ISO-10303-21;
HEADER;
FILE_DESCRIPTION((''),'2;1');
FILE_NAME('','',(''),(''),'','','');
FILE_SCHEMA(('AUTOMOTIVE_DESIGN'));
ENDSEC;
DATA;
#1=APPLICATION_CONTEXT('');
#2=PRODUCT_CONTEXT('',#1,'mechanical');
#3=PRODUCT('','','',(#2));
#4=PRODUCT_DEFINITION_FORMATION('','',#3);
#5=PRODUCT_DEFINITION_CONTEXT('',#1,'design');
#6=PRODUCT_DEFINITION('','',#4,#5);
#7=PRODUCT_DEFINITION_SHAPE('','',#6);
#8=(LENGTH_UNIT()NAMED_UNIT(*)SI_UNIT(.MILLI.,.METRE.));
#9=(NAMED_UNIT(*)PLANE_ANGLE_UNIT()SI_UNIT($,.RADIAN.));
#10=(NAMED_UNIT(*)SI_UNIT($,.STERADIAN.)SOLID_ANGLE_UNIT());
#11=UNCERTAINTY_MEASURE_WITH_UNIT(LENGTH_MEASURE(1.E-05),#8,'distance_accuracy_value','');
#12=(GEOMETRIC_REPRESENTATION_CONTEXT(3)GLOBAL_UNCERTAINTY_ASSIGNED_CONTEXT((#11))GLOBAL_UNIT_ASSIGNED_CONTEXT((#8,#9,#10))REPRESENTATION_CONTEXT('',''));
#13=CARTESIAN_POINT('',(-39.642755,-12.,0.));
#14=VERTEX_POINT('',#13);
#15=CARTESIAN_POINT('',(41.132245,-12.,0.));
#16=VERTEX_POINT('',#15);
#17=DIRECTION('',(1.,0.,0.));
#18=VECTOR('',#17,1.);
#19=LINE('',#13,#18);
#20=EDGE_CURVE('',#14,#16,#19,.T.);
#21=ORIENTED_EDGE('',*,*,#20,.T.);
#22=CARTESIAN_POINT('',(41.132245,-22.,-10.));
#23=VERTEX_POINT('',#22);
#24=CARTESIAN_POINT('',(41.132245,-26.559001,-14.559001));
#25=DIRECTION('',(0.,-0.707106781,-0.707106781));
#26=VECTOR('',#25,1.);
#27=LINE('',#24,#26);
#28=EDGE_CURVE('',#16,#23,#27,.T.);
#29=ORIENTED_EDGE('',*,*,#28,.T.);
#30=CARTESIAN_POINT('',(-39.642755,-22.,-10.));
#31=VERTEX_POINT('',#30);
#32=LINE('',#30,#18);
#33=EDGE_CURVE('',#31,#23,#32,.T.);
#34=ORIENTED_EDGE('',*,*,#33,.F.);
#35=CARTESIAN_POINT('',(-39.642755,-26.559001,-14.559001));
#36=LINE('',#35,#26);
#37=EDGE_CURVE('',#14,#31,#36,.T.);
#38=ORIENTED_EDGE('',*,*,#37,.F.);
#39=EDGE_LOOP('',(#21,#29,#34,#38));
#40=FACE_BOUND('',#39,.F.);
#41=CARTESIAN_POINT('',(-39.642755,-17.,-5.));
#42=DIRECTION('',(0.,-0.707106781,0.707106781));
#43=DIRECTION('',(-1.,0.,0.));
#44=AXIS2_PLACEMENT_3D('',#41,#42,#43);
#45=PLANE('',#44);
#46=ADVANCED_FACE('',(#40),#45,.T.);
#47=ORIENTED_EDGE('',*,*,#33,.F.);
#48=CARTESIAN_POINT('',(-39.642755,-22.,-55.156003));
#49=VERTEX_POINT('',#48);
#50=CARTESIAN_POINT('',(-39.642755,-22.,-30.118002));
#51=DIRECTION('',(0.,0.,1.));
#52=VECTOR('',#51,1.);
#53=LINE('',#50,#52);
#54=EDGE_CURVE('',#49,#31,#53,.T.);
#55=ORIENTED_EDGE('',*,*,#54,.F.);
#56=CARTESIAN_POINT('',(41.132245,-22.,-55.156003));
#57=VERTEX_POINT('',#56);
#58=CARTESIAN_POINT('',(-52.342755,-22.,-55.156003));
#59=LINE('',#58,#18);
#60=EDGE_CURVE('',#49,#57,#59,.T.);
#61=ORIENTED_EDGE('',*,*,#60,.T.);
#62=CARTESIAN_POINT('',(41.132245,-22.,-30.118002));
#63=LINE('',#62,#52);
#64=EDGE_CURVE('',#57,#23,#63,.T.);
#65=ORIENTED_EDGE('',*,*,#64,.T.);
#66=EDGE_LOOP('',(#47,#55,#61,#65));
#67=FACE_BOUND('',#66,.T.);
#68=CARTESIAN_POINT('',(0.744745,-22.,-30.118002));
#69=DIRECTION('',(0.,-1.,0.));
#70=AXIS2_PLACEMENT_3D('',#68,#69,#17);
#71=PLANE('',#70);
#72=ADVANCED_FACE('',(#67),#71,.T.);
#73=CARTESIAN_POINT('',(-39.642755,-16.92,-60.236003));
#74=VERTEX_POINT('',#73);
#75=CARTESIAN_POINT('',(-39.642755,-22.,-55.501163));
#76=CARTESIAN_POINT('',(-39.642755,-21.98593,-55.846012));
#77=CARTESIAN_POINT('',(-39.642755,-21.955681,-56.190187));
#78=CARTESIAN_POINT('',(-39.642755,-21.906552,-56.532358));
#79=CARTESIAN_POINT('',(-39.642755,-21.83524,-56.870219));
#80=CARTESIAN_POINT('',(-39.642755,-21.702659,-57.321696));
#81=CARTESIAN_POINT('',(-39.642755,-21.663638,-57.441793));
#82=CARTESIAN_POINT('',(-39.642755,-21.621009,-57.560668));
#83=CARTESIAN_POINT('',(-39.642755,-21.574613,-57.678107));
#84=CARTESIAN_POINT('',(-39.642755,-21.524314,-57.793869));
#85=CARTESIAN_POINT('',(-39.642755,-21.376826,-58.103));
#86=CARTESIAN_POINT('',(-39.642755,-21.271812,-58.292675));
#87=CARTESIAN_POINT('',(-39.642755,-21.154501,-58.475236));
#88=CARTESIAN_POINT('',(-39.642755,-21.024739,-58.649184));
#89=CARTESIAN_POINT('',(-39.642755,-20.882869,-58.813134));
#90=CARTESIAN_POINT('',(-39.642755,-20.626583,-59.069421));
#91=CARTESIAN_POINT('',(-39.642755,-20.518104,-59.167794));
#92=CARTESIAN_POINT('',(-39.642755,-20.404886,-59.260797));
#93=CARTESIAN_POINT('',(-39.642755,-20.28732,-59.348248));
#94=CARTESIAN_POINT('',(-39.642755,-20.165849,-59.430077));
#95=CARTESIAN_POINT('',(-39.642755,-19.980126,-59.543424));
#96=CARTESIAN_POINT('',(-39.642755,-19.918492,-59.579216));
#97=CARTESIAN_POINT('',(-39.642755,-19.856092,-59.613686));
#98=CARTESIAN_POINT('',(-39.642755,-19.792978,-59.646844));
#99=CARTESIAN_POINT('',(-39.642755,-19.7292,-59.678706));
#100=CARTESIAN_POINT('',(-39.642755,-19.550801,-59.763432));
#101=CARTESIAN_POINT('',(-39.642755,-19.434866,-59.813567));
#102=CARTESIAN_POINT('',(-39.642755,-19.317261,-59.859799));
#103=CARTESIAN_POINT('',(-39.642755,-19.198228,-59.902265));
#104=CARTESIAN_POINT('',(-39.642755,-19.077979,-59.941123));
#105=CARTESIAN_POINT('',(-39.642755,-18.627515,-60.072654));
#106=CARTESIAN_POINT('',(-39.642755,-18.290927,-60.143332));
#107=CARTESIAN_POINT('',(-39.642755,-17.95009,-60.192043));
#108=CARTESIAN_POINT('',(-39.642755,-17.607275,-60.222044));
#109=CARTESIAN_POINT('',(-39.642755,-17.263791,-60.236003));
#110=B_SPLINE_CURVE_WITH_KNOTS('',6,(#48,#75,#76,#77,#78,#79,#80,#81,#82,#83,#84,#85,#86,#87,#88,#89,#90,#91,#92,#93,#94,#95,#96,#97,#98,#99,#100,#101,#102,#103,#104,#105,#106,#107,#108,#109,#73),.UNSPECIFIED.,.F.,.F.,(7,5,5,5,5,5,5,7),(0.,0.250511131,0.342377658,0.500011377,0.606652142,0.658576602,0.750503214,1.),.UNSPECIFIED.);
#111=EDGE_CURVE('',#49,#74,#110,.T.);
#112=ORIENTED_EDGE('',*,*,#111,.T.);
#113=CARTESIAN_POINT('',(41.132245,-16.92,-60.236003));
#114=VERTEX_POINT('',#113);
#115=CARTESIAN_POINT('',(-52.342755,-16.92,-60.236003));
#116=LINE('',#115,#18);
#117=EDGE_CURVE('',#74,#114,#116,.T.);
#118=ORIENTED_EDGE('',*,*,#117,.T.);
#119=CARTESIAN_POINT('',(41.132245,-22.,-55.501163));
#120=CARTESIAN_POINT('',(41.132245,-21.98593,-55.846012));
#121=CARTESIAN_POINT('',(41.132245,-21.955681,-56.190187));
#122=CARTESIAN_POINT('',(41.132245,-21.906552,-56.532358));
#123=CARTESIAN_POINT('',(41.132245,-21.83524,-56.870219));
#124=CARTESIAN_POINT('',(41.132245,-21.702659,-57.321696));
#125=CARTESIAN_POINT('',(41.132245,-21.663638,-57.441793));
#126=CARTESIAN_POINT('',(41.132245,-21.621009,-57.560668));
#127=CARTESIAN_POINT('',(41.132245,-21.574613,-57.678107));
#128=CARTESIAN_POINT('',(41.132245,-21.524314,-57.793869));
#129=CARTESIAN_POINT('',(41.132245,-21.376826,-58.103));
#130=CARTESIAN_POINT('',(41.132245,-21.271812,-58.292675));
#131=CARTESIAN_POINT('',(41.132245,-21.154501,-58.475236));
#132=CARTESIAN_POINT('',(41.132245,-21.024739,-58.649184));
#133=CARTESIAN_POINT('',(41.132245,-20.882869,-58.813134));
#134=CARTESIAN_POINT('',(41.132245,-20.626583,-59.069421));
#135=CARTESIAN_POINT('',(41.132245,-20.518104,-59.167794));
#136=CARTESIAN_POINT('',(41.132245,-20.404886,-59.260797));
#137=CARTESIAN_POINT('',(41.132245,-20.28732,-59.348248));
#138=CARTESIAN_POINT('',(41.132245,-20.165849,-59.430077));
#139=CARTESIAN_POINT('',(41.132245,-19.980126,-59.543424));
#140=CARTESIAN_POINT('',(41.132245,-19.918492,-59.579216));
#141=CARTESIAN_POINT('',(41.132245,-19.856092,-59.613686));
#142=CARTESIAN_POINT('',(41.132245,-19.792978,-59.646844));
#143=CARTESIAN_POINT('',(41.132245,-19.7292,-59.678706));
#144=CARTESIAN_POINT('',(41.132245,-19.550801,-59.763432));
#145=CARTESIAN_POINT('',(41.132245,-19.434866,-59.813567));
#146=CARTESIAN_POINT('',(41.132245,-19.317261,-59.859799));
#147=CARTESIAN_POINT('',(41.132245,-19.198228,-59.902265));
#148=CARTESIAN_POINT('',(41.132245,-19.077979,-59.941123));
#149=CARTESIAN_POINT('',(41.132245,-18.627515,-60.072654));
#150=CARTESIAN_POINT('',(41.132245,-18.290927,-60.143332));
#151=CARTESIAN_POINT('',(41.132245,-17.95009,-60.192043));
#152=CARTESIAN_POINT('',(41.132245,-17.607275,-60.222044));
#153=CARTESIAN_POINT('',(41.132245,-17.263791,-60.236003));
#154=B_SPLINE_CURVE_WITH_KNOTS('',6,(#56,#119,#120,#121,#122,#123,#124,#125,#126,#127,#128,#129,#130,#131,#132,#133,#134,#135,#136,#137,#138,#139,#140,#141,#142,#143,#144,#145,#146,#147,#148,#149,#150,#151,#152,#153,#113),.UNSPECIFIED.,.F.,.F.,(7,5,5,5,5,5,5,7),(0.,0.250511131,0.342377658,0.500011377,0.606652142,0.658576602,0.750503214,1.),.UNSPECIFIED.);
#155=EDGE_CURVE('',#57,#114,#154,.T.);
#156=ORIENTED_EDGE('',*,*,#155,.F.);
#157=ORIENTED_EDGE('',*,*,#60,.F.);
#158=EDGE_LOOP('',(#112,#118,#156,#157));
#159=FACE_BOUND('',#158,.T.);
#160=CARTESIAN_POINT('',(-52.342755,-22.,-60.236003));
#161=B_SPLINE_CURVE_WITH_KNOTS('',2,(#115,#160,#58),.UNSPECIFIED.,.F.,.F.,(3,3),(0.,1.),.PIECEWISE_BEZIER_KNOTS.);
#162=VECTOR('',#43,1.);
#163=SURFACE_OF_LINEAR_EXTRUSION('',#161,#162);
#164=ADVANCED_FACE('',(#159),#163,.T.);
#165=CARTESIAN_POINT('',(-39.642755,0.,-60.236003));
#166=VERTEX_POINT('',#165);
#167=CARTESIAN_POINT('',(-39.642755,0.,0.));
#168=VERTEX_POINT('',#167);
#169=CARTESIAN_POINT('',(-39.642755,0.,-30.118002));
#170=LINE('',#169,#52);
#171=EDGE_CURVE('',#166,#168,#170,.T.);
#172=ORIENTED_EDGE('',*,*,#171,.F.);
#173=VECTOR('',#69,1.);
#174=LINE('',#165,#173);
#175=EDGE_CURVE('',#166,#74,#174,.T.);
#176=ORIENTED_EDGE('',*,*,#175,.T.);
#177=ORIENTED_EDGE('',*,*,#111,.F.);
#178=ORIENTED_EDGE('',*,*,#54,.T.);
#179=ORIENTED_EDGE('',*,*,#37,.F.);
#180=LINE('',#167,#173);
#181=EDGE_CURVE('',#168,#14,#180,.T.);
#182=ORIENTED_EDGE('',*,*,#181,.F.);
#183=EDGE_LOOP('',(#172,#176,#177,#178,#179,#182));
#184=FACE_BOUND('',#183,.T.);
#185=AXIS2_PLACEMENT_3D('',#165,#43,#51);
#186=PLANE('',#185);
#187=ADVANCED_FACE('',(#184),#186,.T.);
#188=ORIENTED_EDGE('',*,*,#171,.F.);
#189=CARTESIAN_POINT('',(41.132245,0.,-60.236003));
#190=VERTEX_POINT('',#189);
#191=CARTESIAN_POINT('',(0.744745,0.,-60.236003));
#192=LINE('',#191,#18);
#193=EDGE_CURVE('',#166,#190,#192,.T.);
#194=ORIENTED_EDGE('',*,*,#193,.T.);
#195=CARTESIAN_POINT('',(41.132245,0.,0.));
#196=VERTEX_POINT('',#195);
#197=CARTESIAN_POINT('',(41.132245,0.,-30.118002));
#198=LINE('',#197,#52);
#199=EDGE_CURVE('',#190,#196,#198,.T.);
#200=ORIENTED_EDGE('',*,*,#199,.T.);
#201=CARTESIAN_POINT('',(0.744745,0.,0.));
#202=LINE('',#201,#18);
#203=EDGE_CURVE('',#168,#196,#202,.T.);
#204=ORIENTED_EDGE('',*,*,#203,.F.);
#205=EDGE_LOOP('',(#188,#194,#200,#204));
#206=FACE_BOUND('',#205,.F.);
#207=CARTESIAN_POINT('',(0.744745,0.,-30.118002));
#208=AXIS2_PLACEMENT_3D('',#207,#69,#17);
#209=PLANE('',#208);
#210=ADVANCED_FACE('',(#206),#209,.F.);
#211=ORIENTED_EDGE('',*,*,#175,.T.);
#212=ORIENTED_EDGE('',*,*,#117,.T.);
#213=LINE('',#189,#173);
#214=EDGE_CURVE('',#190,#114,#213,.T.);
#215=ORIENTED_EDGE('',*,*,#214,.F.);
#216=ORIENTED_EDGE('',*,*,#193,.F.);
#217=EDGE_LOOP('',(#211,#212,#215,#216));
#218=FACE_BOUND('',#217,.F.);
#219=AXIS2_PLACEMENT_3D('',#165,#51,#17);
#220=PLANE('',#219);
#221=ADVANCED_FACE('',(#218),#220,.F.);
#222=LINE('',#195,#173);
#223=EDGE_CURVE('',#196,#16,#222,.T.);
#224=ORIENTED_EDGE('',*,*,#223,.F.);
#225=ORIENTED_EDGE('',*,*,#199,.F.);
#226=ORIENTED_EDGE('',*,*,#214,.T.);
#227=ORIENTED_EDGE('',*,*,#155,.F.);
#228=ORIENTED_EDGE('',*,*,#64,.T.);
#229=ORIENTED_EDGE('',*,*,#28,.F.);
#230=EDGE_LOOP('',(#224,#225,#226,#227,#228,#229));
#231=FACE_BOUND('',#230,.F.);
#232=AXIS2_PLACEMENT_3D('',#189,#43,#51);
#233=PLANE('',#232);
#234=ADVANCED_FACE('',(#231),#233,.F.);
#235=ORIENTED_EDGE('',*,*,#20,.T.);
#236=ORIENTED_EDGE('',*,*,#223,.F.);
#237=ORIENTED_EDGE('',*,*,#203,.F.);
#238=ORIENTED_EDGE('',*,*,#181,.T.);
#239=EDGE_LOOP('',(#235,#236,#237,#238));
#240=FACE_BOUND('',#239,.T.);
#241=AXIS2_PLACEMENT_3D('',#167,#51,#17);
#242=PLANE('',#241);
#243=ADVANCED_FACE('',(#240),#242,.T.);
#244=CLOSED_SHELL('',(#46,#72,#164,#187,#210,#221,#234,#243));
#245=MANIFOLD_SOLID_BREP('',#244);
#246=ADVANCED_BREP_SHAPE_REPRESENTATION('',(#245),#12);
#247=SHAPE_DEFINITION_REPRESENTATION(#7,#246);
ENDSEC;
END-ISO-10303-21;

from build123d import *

# Parameters (mm, degrees)
F0_W        = 80.775000155
F0_H        = 60.2360032499
F1_DEPTH    = 22
F2_T1_DEPTH = 106.175000155
F3_SIZE     = 10


# Not quite as in the source:
# - a fillet or chamfer that OpenCascade refuses, or shapes differently, is made with other operations: its cross-section is extruded or revolved along the edge and cut away or added


with BuildPart() as f1:
    # F0 (on Front) → F1 (new body)
    with BuildSketch(Plane.XZ):
        with Locations((0.7447451353, -30.1180016249)):
            Rectangle(F0_W, F0_H)
    extrude(amount=F1_DEPTH)

    # F2: fillet of radius 5.08 on 1 edges, made by hand

    # F2_s2 → F2_t1 (cut)
    with BuildSketch(Plane.YZ.offset(-52.3427549422)):
        with BuildLine():
            add(Edge.make_bspline(
                [(-16.92, -60.2360032499), (-22, -60.2360032499), (-22, -55.1560032499)],
                knots=[0, 0, 0, 1, 1, 1], degree=2, weights=[1, 1, 1]))
            Line((-22, -55.1560032499), (-22, -60.2360032499))
            Line((-22, -60.2360032499), (-16.92, -60.2360032499))
        make_face()
    extrude(amount=F2_T1_DEPTH, mode=Mode.SUBTRACT)

    # F3
    f3_edges = [f1.edges().sort_by_distance(p)[0] for p in [
        (0.744745, -22, 0),
    ]]
    chamfer(f3_edges, length=F3_SIZE)


solid = f1.part
